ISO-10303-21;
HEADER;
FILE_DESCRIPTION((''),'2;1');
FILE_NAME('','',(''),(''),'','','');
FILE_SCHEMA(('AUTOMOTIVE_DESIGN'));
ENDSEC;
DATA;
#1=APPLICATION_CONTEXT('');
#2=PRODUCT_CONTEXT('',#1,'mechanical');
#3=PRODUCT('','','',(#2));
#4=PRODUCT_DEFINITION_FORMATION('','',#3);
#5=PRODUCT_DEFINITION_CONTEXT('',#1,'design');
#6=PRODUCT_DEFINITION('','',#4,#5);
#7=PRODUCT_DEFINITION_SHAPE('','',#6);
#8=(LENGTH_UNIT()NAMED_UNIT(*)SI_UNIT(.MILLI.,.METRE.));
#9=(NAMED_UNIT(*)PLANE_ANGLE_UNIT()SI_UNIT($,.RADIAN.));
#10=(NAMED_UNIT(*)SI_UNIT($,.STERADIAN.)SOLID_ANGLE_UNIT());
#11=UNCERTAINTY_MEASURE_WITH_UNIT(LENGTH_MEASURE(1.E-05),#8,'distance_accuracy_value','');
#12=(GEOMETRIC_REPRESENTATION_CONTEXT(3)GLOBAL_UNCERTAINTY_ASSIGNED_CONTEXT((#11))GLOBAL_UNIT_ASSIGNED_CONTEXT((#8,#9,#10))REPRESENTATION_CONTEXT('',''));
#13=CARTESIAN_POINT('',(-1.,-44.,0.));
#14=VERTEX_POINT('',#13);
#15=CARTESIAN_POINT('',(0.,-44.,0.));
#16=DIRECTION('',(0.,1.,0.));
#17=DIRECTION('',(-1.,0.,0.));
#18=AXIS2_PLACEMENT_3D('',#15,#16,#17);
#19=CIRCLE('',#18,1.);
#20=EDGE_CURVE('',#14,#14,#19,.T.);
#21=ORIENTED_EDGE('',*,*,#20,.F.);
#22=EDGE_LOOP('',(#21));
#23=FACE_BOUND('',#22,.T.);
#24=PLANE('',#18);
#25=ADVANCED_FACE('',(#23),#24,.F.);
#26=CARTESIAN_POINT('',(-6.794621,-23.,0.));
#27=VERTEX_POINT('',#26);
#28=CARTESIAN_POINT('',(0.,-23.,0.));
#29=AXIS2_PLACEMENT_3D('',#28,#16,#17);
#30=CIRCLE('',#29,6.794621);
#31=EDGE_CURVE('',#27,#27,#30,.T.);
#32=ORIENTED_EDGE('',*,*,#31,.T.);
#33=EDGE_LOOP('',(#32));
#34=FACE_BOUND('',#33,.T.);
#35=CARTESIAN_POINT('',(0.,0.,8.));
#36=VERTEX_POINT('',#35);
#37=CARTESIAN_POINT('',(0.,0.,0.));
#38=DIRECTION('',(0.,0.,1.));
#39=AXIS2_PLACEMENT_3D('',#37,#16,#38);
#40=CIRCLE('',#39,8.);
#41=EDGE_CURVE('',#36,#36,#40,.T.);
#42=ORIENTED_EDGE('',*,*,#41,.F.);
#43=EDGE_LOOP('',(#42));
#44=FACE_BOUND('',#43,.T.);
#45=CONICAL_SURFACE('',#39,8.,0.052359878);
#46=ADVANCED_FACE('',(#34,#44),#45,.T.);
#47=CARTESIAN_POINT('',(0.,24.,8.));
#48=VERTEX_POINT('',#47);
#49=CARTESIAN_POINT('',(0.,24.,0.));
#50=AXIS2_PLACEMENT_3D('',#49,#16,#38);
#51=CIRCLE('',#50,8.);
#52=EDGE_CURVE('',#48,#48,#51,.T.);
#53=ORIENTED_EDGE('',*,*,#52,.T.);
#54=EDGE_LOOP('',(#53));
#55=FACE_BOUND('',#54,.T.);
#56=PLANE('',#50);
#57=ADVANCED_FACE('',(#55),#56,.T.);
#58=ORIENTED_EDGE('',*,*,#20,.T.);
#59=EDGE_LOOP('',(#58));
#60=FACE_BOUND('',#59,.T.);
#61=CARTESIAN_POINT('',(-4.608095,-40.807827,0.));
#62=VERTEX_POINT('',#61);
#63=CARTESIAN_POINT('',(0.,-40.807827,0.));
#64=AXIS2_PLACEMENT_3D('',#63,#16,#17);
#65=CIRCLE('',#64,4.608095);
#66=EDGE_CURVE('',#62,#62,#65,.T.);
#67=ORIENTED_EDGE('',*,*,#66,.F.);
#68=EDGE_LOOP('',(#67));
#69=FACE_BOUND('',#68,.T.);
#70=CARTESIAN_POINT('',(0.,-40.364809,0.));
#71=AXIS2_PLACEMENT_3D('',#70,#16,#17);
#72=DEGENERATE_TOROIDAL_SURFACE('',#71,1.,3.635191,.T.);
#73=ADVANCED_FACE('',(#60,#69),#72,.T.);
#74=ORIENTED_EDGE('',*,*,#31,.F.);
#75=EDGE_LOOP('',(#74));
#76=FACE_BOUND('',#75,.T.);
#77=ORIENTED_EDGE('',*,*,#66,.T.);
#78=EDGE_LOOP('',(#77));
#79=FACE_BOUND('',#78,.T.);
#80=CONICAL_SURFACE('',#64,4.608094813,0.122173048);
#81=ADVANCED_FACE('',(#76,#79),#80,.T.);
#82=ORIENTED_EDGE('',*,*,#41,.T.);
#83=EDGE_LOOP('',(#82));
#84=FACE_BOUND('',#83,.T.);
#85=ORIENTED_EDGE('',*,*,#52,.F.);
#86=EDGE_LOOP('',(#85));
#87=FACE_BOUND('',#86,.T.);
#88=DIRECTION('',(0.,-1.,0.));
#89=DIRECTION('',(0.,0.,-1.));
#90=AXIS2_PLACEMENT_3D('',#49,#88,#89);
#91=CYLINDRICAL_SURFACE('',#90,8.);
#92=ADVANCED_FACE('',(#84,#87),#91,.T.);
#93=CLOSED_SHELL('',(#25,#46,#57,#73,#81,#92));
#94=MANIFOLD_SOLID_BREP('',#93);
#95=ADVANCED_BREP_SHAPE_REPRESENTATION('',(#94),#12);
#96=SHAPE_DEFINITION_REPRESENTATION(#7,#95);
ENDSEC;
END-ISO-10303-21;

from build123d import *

# Parameters (mm, degrees)
SKETCH_606_R    = 8
EXTRUDE_1_DEPTH = 24


# Read off the part's stored shape, not the designer's step: 凸台-拉伸2
with BuildPart() as part:
    # Sketch 606 → 凸台-拉伸1 (new body)
    with BuildSketch(Plane(origin=(0, 0, 0), x_dir=(1, 0, 0), z_dir=(0, 1, 0))):
        with Locations(Location((0, 0, 0), (0, 0, 270))):
            Circle(SKETCH_606_R)
    extrude(amount=EXTRUDE_1_DEPTH)

    # 凸台-拉伸2 outline → 凸台-拉伸2 (revolve)
    with BuildSketch(Plane.XY):
        Polygon((0, -23), (6.794621076, -23), (8, 0), (0, 0), align=None)
    revolve(axis=Axis((0, 0, 0), (0, 1, 0)))

    # 草图7 → 旋转4 (revolve)
    with BuildSketch(Plane.XY, mode=Mode.PRIVATE) as revolve_4_sk:
        with BuildLine():
            Line((0, -23), (6.794621076, -23))
            Line((6.794621076, -23), (4.608094813, -40.807827362))
            ThreePointArc((4.608094813, -40.807827362), (3.408750419, -43.087406102), (1, -44))
            Line((1, -44), (0, -44))
            Line((0, -44), (0, -23))
        make_face()
    revolve(revolve_4_sk.sketch.rotate(Axis((0, -23, 0), (0, -1, 0)), 180), axis=Axis((0, -23, 0), (0, -1, 0)))


solid = part.part
